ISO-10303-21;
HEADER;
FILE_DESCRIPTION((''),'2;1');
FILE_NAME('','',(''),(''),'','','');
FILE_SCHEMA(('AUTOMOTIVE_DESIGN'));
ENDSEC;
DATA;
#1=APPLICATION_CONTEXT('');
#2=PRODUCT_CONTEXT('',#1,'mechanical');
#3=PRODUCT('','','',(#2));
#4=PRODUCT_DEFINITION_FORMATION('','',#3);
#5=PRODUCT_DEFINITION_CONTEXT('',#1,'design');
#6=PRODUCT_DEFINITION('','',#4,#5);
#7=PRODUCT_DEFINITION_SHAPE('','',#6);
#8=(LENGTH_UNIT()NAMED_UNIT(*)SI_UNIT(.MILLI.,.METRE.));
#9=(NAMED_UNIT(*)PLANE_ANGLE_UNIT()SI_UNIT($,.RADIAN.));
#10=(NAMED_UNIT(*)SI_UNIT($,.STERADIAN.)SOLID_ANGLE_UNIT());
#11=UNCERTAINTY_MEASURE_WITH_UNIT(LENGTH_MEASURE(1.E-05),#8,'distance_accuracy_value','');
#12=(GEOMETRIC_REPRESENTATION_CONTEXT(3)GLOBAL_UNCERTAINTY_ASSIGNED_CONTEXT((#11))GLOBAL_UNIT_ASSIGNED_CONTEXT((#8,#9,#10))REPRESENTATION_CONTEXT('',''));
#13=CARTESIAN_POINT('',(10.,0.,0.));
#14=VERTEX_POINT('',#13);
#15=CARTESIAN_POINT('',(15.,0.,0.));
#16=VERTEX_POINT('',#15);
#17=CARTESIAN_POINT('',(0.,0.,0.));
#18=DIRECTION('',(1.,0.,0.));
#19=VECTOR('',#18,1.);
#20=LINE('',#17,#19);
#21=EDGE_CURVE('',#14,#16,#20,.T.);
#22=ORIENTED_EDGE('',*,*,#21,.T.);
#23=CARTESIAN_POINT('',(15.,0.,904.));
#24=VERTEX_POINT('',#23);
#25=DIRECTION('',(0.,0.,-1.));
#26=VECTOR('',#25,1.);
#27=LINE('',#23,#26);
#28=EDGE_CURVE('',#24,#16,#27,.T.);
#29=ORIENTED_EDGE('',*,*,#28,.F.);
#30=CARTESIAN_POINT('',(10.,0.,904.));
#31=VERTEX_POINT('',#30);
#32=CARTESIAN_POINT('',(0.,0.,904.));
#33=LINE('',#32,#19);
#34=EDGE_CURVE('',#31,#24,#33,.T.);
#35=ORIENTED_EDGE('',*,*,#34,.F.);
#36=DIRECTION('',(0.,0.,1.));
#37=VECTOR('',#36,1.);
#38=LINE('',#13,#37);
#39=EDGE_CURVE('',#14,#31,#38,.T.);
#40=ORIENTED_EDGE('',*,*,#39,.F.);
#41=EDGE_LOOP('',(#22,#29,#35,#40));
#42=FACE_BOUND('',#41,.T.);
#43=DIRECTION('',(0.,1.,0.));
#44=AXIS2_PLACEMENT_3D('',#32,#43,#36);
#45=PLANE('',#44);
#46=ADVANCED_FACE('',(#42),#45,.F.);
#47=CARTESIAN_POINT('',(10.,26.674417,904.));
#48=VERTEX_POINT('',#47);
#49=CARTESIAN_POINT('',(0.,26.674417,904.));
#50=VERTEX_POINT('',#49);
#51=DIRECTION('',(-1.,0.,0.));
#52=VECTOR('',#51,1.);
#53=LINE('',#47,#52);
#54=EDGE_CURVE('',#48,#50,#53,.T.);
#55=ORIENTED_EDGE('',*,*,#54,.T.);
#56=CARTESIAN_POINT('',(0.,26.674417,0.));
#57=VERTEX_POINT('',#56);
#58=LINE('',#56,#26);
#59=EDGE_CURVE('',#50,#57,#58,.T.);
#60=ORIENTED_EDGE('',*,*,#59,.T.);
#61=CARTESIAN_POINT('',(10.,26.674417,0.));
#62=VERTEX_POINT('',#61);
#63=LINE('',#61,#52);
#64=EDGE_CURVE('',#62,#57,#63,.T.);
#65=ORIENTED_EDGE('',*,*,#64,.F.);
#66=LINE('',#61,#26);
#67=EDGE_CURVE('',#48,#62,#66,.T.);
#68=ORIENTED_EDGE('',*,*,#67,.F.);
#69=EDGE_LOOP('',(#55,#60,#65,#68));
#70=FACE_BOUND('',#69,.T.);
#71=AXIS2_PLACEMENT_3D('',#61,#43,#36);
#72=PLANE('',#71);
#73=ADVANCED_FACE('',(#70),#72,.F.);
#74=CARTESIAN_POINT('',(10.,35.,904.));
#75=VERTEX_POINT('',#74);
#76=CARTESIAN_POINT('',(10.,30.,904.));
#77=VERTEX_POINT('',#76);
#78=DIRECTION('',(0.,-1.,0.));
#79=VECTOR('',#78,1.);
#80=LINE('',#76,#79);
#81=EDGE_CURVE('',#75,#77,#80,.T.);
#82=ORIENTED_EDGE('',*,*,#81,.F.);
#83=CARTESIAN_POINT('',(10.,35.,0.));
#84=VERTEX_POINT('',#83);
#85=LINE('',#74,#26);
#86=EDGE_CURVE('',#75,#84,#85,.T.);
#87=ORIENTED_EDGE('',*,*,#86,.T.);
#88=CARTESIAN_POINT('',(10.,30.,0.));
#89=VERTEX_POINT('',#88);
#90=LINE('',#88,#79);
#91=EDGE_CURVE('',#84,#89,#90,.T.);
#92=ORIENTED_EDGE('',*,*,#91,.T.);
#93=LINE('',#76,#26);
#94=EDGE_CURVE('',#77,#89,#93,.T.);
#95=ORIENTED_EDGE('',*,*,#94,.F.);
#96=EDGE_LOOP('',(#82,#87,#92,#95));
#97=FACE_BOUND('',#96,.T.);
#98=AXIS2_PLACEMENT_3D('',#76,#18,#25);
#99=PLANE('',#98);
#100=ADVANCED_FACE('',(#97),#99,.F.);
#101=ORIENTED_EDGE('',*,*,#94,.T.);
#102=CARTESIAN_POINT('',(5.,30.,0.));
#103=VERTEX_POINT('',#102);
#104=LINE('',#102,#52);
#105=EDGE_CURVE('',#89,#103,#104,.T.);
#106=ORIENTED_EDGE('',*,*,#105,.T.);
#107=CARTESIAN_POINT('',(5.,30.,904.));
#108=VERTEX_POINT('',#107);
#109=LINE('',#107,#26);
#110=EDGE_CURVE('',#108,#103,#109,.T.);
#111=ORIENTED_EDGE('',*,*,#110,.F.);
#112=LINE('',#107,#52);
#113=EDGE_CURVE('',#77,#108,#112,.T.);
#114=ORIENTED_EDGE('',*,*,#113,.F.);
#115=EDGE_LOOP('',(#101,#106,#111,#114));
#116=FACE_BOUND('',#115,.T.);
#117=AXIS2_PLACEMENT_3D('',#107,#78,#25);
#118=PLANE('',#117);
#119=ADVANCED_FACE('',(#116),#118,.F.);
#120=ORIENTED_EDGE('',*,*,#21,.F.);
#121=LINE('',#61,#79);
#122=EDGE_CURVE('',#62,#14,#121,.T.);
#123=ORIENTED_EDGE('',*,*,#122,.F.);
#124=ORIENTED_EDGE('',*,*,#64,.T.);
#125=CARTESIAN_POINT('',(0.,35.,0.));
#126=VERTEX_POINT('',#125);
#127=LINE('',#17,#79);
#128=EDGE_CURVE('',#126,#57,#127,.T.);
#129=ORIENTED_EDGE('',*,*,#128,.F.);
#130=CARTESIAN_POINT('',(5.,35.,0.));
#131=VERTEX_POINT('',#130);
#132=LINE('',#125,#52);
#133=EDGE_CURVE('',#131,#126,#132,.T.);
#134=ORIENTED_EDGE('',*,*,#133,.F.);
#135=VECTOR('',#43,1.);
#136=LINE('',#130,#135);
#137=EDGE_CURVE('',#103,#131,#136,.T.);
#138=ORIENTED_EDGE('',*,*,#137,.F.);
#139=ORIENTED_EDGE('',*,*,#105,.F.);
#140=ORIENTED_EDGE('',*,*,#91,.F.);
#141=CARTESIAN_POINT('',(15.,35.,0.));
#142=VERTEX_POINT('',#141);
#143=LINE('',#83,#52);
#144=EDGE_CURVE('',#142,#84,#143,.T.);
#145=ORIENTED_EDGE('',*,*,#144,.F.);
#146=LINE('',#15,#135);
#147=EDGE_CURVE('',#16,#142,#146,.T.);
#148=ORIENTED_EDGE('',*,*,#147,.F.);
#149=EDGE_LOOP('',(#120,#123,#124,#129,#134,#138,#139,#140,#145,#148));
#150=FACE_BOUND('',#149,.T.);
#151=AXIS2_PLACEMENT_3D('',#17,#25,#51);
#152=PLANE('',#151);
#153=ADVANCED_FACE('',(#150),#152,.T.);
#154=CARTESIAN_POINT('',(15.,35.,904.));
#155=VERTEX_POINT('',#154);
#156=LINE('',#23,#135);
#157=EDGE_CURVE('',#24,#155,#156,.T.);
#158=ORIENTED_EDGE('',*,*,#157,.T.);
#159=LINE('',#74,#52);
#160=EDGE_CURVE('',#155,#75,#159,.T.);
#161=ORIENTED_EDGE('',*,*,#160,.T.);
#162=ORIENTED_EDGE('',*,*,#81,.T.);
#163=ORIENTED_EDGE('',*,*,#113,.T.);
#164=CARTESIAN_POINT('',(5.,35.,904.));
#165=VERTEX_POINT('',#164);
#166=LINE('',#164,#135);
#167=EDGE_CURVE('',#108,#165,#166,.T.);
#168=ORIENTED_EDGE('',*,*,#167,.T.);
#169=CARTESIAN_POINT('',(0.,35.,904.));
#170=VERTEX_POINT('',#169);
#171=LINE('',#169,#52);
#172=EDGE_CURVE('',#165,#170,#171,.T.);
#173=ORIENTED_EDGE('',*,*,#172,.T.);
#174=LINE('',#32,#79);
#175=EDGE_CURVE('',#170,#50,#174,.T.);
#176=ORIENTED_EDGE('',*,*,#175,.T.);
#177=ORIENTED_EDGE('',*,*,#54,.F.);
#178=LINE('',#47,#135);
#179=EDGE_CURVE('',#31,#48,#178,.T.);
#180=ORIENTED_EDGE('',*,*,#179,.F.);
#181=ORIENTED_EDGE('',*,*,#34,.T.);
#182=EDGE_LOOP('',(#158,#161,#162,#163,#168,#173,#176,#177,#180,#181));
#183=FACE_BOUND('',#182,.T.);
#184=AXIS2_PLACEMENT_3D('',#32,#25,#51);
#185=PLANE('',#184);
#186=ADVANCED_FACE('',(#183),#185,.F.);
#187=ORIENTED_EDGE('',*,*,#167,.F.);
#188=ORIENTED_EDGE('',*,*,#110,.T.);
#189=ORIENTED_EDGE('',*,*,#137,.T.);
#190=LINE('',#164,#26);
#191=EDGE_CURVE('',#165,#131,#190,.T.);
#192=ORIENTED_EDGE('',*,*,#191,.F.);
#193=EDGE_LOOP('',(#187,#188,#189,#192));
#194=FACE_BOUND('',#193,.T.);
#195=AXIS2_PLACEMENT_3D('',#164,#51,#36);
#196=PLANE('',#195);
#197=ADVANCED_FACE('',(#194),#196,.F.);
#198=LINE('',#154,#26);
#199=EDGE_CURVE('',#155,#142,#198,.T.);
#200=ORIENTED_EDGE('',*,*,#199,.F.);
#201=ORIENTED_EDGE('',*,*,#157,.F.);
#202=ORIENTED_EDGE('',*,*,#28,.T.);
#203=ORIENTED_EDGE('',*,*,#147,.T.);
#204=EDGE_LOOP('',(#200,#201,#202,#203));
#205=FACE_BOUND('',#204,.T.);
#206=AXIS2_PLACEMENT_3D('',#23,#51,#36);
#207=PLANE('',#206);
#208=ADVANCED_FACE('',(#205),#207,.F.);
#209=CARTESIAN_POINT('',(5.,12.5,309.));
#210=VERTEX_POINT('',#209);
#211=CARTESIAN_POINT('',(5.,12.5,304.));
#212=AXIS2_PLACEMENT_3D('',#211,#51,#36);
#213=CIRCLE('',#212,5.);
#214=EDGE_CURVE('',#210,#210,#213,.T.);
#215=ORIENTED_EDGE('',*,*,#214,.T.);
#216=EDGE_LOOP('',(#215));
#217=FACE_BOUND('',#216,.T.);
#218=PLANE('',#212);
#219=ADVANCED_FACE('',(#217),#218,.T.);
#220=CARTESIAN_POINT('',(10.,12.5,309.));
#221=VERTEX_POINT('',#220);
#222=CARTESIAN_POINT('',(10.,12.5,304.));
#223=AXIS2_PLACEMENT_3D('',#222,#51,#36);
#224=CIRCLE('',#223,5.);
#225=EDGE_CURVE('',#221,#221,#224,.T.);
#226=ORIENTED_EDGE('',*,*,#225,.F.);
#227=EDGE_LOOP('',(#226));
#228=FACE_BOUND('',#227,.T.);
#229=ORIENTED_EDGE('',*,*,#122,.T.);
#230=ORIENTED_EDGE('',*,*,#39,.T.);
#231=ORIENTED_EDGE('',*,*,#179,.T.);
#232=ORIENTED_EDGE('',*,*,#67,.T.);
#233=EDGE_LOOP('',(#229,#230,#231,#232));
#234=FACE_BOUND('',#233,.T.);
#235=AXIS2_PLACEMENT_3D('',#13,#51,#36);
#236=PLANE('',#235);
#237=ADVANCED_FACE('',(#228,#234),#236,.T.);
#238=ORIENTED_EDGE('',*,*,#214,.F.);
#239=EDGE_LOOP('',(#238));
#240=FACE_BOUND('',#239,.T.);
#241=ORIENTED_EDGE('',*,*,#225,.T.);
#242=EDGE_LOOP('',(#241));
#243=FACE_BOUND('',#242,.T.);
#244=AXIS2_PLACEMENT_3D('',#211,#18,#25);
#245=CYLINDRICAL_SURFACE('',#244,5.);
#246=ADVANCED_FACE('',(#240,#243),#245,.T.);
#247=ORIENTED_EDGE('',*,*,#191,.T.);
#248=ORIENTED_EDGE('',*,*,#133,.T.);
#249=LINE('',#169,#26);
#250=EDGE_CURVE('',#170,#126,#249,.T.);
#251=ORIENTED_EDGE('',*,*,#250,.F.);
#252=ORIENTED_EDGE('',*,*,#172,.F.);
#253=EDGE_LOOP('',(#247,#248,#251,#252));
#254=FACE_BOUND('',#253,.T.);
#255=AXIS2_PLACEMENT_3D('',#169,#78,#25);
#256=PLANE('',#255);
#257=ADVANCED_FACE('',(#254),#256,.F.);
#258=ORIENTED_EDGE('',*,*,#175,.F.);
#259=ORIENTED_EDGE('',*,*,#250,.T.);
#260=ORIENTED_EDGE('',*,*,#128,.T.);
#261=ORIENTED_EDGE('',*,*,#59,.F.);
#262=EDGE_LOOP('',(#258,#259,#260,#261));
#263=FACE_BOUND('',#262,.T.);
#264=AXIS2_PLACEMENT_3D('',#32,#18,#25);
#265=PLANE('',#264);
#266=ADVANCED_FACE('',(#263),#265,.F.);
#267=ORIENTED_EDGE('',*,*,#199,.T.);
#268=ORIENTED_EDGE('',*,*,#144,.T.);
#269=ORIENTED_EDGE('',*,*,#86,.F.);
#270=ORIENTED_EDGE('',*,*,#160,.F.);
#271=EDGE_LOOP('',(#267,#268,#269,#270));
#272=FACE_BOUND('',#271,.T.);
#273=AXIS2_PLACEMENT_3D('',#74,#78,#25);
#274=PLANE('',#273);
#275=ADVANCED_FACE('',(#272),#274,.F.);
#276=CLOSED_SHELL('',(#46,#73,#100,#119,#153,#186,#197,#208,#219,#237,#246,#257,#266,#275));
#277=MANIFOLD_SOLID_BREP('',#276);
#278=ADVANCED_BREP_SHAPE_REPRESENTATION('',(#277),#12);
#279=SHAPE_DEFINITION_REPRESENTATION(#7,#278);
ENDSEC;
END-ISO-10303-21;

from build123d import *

# Parameters (mm, degrees)
BOSS_EXTRUDE1_DEPTH = 904
SKETCH4_W           = 904
SKETCH4_H           = 26.674416974
CUT_EXTRUDE3_DEPTH  = 10
SKETCH7_R           = 5
BOSS_EXTRUDE4_DEPTH = 5


with BuildPart() as part:
    # Sketch1 → Boss-Extrude1 (new body)
    with BuildSketch(Plane.XY):
        Polygon((0, 35), (5, 35), (5, 30), (10, 30), (10, 35), (15, 35), (15, 0), (0, 0), align=None)
    extrude(amount=BOSS_EXTRUDE1_DEPTH)

    # Sketch4 → Cut-Extrude3 (cut)
    with BuildSketch(Plane.ZY):
        with Locations((452, 13.337208487)):
            Rectangle(SKETCH4_W, SKETCH4_H)
    extrude(amount=-CUT_EXTRUDE3_DEPTH, mode=Mode.SUBTRACT)

    # Sketch7 → Boss-Extrude4 (add)
    with BuildSketch(Plane.ZY.offset(-10)):
        with Locations((304, 12.5)):
            Circle(SKETCH7_R)
    extrude(amount=BOSS_EXTRUDE4_DEPTH)


solid = part.part
